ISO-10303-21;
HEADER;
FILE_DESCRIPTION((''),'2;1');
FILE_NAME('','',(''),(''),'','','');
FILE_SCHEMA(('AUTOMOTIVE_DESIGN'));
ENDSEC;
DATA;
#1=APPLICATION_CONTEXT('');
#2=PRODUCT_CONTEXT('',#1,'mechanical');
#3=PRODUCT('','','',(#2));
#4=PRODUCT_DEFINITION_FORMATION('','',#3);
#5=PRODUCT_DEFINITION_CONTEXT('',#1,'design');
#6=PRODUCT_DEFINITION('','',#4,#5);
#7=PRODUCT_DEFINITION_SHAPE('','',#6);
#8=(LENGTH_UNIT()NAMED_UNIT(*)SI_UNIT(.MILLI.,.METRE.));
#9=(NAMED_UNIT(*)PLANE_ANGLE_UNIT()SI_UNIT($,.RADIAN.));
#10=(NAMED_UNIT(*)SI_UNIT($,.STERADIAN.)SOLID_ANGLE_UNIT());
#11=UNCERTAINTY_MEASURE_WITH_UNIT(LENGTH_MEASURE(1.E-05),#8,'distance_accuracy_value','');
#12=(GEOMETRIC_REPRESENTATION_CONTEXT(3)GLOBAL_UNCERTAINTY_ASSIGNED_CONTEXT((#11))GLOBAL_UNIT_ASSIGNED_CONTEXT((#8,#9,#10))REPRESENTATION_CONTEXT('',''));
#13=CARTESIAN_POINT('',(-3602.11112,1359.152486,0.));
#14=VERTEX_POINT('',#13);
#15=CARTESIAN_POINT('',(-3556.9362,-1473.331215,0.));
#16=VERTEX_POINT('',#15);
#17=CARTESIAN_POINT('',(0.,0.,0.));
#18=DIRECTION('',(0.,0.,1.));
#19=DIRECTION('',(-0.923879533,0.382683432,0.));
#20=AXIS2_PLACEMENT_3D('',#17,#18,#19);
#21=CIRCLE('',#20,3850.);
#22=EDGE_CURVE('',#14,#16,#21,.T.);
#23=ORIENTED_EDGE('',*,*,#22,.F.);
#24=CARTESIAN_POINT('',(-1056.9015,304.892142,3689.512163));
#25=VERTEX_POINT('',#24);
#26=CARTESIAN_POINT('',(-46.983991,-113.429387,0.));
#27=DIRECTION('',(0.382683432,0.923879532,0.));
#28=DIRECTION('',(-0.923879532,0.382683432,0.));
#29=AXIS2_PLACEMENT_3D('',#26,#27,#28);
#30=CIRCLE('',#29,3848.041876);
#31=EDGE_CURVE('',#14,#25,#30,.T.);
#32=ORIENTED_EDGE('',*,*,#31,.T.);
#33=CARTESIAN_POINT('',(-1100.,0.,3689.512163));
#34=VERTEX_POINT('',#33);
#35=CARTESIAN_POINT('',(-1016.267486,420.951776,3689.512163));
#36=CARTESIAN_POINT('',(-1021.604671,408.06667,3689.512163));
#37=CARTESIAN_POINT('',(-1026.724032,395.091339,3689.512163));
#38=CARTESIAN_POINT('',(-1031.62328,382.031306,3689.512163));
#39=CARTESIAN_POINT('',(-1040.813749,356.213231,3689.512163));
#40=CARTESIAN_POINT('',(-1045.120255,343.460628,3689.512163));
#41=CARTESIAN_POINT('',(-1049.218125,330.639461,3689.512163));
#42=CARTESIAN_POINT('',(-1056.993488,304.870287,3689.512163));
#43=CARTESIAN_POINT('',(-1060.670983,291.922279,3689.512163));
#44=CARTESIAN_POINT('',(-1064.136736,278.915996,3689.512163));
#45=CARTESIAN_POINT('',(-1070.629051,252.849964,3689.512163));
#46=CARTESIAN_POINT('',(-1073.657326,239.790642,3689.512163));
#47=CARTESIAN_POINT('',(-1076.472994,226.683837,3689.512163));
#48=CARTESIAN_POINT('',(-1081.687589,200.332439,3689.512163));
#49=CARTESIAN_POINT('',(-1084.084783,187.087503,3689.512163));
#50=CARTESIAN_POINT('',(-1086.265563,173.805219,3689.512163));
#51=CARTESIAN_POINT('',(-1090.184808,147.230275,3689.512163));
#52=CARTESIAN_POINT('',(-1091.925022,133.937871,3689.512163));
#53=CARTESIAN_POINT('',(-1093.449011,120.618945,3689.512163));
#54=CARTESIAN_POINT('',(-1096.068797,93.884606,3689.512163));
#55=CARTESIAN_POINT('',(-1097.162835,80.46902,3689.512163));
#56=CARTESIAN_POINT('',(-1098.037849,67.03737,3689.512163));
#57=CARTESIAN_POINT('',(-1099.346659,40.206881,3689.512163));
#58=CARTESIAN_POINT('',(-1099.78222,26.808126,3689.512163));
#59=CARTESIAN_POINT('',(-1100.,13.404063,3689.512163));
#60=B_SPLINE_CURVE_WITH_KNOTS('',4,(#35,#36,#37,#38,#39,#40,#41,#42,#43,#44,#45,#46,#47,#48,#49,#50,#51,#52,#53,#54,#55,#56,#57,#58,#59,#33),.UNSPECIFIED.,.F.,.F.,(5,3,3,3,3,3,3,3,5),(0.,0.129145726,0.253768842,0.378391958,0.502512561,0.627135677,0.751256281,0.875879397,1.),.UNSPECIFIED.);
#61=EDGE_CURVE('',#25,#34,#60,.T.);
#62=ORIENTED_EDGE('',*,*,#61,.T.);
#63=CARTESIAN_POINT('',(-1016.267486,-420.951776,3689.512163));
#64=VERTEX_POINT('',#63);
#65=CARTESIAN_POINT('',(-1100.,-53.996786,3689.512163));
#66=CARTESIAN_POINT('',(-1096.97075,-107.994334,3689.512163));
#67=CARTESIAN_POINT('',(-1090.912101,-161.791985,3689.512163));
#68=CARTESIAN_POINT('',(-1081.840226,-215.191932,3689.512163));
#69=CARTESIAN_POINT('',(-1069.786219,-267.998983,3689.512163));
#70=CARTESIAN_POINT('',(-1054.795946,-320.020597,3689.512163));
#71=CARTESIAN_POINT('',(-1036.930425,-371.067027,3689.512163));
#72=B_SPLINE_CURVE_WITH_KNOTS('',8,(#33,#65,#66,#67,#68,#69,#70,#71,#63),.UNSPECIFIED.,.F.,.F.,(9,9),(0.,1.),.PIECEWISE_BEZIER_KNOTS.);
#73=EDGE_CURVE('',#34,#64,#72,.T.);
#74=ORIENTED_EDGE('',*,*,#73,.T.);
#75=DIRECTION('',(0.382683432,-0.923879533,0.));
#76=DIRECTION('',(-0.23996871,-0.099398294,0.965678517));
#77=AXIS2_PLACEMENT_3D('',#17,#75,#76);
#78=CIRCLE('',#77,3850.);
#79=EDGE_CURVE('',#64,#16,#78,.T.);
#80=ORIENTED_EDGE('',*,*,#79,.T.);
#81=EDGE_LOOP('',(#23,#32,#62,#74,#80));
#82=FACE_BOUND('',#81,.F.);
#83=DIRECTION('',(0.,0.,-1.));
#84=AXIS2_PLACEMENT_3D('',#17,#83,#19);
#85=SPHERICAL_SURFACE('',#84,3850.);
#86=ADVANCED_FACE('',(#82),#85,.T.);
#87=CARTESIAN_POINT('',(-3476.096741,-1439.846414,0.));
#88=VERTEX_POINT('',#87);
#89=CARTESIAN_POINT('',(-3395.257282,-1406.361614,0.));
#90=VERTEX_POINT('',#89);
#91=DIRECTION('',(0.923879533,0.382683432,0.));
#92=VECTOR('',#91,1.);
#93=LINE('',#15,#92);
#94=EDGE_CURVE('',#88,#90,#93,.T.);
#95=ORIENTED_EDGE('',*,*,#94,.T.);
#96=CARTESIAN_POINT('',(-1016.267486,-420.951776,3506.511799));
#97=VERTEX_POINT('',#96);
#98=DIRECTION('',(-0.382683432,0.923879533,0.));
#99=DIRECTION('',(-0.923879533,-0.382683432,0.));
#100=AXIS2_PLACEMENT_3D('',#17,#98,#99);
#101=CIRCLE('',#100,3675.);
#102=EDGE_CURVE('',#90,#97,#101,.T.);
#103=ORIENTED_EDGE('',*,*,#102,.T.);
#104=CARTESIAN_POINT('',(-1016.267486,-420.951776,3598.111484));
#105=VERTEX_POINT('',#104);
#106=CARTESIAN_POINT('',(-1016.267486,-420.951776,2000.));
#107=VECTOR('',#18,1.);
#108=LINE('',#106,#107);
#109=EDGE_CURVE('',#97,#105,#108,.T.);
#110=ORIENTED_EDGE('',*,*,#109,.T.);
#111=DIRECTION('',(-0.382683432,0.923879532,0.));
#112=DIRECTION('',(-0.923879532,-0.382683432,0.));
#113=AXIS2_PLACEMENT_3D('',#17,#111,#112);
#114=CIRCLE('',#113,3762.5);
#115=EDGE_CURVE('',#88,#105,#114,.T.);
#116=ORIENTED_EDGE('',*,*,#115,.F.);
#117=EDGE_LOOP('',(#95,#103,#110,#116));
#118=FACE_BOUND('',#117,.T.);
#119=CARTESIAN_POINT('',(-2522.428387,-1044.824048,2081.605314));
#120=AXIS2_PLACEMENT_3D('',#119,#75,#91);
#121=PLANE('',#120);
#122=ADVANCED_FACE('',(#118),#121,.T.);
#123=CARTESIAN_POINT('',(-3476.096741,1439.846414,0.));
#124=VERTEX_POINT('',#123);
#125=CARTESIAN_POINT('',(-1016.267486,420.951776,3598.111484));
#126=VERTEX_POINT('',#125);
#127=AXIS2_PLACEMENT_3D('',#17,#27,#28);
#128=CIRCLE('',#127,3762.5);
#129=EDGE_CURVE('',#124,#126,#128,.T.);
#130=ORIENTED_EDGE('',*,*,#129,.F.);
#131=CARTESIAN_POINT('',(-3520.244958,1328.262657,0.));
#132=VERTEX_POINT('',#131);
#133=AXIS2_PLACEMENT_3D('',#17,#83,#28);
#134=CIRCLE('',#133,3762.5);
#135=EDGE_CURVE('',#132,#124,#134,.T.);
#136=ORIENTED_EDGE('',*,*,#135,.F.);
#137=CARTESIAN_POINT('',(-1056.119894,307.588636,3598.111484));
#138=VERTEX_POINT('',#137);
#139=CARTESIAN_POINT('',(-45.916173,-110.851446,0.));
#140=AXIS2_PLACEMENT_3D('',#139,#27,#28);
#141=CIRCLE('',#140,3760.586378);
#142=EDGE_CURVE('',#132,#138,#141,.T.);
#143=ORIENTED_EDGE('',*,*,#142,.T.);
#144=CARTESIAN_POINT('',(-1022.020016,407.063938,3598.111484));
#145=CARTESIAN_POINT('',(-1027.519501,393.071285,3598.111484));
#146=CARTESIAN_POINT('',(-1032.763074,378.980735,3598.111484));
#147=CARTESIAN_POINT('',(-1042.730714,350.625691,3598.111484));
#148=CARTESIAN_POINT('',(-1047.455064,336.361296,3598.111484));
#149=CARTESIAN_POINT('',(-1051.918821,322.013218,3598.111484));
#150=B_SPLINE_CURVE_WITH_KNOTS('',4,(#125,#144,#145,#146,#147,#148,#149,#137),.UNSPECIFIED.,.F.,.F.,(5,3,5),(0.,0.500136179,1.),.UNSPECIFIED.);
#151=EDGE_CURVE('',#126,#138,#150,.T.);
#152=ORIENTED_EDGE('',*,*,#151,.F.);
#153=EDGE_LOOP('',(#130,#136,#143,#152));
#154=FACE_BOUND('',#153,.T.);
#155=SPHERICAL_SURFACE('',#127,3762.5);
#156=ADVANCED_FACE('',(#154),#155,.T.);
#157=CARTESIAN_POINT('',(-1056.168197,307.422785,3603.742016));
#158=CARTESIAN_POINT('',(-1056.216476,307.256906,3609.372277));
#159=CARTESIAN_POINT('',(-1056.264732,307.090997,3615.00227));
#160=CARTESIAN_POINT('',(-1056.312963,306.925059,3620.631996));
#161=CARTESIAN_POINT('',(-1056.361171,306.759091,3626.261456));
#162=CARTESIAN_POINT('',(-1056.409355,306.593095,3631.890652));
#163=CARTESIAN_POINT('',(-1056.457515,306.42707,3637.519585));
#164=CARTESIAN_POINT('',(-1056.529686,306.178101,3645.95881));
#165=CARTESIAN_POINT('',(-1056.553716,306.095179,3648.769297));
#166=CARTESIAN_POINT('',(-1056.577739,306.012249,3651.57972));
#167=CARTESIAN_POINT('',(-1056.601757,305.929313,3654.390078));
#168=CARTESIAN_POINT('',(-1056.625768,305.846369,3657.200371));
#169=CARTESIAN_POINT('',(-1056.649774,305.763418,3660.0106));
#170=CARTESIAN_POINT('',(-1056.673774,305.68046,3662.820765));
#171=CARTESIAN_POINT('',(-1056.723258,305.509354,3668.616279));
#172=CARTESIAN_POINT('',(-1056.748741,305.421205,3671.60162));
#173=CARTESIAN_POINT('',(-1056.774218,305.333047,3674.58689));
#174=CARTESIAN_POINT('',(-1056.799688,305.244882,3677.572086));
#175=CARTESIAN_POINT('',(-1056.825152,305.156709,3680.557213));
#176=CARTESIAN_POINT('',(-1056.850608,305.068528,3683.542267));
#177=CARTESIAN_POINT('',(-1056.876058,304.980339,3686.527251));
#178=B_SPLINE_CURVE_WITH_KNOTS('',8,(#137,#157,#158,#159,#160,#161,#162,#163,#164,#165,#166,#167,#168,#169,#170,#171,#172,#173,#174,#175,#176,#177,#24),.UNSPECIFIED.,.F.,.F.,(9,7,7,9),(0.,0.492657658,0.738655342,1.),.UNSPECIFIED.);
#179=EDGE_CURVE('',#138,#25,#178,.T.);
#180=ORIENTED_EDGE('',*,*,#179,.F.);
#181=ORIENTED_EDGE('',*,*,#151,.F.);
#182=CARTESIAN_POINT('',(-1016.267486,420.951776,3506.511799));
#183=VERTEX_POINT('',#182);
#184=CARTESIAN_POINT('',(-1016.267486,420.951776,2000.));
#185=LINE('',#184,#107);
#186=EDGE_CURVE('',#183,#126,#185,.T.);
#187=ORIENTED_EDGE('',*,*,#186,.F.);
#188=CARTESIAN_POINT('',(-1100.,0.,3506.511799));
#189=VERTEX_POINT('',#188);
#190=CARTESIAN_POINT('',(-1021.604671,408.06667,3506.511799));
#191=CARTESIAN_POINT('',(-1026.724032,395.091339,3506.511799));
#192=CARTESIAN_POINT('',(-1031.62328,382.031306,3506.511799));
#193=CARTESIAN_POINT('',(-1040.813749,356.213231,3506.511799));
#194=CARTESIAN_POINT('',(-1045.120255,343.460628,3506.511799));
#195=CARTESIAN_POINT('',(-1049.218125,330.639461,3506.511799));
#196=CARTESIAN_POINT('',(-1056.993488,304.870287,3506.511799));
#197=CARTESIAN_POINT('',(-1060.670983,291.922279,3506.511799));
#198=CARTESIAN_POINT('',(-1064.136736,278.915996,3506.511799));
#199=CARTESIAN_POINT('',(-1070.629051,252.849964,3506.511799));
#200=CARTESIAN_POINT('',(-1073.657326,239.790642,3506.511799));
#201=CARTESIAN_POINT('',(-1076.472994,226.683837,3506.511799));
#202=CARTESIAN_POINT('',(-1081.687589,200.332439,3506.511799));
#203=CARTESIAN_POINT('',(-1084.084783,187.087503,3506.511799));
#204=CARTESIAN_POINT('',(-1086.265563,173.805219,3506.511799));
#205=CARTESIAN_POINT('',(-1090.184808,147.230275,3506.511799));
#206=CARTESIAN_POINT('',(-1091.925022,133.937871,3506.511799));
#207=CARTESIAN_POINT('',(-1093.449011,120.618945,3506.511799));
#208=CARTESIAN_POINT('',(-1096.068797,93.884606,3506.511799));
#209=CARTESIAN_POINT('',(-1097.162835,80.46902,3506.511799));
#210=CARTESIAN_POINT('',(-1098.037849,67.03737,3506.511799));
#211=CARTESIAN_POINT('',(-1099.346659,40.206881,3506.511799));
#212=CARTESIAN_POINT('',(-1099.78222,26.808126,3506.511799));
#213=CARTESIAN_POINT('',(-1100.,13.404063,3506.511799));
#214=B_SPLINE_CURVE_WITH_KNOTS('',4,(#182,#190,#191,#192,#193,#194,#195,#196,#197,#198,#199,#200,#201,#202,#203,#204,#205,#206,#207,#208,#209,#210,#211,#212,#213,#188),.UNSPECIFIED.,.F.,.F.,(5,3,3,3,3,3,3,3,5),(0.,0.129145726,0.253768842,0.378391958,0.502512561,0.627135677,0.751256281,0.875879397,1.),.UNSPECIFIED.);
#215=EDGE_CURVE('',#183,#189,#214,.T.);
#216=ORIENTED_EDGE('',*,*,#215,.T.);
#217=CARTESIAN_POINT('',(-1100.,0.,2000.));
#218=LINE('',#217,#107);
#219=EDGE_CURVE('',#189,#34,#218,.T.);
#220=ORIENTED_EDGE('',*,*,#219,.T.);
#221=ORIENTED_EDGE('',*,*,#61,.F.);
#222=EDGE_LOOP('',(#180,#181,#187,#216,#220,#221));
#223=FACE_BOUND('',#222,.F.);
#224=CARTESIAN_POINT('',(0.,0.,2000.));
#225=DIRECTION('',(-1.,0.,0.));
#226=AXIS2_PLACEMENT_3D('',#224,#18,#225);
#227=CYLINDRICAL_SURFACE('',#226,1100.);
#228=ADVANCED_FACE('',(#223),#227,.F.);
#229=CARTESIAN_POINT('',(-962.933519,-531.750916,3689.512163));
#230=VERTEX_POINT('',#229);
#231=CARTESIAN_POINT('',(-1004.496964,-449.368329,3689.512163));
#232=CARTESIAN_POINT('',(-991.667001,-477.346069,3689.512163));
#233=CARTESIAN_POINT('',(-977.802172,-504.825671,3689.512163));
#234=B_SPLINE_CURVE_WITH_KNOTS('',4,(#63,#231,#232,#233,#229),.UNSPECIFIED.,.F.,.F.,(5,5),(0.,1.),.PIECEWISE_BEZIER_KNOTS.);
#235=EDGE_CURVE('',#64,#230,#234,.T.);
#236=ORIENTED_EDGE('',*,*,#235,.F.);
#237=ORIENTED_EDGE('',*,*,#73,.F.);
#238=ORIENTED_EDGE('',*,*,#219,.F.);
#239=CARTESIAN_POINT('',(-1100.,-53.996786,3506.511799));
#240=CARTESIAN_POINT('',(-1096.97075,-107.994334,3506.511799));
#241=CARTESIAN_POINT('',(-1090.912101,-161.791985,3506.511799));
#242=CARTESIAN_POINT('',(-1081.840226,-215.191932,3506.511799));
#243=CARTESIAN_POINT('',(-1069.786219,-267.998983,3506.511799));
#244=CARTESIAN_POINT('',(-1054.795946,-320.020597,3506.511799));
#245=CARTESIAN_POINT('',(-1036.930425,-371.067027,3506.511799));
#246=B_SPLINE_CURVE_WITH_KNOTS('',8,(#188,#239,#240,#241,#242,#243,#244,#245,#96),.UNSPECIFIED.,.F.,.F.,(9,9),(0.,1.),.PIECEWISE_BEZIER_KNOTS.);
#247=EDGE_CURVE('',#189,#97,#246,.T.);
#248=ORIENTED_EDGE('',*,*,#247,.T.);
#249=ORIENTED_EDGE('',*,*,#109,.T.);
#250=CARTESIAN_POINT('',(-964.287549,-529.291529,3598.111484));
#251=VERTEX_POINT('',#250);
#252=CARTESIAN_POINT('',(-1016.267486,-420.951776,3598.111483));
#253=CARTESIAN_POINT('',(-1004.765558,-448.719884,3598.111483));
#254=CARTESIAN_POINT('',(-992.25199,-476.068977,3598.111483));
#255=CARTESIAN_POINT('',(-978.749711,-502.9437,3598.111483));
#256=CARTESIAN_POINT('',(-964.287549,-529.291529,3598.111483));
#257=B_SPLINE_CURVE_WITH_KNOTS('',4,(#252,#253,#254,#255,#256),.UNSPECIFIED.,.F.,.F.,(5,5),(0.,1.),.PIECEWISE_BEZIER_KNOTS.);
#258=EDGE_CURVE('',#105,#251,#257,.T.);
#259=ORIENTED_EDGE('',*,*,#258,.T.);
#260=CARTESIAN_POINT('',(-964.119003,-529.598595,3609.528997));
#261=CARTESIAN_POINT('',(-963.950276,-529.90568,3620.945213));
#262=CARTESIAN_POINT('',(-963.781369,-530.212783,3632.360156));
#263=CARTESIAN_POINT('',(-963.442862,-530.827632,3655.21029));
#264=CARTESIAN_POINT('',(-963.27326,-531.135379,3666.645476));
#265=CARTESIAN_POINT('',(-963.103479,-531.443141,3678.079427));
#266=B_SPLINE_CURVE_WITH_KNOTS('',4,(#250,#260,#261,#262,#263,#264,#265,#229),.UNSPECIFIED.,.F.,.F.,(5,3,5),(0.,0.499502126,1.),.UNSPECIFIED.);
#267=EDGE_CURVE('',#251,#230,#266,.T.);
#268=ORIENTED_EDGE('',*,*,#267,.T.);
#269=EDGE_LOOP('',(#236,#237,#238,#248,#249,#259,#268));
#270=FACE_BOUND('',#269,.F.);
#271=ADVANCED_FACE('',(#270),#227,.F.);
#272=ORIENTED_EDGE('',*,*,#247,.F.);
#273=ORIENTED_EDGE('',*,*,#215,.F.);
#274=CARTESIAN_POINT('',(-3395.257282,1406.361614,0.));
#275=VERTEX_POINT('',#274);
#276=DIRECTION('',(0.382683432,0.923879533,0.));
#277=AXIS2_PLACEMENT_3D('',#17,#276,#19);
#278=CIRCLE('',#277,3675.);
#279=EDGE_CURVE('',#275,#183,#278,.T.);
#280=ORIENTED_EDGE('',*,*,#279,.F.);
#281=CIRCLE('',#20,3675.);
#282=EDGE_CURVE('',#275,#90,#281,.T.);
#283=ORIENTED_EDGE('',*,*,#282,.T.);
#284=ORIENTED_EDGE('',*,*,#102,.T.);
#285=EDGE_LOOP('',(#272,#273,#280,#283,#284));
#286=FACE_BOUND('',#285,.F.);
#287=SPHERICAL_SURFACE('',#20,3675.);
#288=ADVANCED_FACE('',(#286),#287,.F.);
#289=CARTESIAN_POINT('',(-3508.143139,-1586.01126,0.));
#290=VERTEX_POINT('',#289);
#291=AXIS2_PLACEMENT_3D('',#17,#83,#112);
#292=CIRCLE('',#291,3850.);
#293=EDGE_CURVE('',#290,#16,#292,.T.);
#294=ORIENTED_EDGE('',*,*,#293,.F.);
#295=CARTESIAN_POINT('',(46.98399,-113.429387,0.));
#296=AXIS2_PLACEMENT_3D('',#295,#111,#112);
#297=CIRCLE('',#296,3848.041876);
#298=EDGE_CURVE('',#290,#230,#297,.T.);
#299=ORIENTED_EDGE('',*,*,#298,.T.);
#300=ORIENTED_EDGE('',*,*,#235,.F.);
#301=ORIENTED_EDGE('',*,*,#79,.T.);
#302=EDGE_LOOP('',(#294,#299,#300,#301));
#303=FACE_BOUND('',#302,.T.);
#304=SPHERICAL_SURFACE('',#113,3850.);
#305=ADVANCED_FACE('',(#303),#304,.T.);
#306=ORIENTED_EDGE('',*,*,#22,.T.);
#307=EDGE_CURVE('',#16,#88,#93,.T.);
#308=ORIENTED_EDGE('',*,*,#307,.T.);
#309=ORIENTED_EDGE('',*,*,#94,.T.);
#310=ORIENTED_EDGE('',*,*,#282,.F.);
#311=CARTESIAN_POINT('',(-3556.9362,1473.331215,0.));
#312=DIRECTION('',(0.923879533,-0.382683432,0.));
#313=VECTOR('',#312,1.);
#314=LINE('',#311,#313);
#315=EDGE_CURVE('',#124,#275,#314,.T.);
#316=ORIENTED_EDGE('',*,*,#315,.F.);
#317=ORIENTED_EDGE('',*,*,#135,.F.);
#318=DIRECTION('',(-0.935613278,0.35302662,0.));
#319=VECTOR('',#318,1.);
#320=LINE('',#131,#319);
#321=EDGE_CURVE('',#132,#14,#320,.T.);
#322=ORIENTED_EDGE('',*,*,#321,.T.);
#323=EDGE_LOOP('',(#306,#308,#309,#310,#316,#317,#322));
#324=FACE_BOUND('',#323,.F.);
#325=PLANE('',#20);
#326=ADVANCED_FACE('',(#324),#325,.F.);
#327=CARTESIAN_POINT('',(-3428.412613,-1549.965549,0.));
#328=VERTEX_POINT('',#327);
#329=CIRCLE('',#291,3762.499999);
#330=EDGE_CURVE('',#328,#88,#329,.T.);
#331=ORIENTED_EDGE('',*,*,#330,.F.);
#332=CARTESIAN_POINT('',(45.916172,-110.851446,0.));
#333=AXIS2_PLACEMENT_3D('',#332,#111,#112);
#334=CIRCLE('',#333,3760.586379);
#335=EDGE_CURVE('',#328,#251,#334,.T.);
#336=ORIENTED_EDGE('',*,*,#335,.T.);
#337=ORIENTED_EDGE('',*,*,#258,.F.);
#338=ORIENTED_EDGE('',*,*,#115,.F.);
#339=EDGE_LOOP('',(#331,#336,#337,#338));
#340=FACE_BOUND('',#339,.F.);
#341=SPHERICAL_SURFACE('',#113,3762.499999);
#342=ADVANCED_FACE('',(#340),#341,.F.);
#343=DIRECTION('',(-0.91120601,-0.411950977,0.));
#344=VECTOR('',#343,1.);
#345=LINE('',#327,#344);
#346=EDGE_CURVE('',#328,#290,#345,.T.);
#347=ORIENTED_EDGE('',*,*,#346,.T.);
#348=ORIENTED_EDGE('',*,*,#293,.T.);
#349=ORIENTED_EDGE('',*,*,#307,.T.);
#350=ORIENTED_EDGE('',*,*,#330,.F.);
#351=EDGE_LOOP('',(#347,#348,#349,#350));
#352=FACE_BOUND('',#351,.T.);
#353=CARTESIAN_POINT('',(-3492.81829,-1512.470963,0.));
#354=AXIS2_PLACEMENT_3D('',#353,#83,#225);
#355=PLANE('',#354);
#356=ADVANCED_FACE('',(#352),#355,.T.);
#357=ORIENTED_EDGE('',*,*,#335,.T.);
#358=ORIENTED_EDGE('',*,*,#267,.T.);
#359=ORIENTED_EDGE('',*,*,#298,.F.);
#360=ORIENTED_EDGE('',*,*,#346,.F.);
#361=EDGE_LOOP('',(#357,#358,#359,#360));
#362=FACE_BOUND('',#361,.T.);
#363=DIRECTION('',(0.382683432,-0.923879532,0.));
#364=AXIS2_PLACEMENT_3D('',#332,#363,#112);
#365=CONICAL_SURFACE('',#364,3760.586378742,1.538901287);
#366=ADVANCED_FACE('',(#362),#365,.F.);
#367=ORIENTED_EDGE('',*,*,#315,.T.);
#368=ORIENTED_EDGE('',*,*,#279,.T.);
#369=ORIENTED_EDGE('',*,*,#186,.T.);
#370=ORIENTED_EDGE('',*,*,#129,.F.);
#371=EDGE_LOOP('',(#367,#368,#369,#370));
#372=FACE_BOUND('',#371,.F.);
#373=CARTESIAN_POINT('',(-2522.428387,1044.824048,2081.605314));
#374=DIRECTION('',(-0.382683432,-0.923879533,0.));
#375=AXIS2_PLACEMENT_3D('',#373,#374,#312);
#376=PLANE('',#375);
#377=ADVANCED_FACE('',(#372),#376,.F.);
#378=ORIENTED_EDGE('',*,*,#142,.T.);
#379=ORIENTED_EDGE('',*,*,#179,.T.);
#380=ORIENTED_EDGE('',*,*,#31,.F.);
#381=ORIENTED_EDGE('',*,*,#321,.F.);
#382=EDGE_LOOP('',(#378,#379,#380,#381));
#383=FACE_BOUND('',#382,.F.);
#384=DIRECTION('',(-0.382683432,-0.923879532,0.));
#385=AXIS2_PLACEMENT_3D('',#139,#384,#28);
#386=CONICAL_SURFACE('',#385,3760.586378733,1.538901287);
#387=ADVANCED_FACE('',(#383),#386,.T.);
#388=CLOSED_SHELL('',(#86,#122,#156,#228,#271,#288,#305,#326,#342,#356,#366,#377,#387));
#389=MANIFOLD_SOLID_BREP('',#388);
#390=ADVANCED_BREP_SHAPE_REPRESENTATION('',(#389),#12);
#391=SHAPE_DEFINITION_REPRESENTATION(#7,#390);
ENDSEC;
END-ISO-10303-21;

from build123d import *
from build123d import SkipClean  # not in build123d's __all__

# Parameters (mm, degrees)
F3_ANGLE_BACK = 22.5
F3_ANGLE      = 45
F8_W          = 1100
F8_H          = 4000


with BuildPart() as f3:
    # F2 (on Front) → F3 (revolve)
    with BuildSketch(Plane.XZ, mode=Mode.PRIVATE) as f3_sk:
        with BuildLine():
            Line((-1000, 3536.3293115885), (-1000, 3717.8622890043))
            ThreePointArc((-1000, 3717.8622890043), (-3055.5277776515, 2342.2745355743), (-3850, 0))
            Line((-3850, 0), (-3675, 0))
            ThreePointArc((-3675, 0), (-2930.9234892777, 2217.050405381), (-1000, 3536.3293115885))
        make_face()
    revolve(f3_sk.sketch.rotate(Axis((0, 0, 3762.5), (0, 0, 1)), -F3_ANGLE_BACK), axis=Axis((0, 0, 3762.5), (0, 0, 1)), revolution_arc=F3_ANGLE)

    # F5: sweep along a path in F5_path
    with BuildLine(Plane(origin=(-3556.9362001685, 1473.3312146056, 0), x_dir=(-0.9238795325, 0.3826834324, 0), z_dir=(-0.3826834324, -0.9238795325, 0))) as f5_path:
        ThreePointArc((0, 0), (-794.4722223485, -2342.2745355743), (-2850, -3717.8622890043))
    # F4 (on face) → F5 (sweep, cut)
    with BuildSketch(Plane(origin=(0, 0, 0), x_dir=(1, 0, 0), z_dir=(0, 0, -1))):
        with BuildLine():
            ThreePointArc((-3476.0967410737, -1439.8464142737), (-3498.6157300331, -1384.230552894), (-3520.2449580431, -1328.2626567709))
            Line((-3520.2449580431, -1328.2626567709), (-3602.111119858, -1359.1524859982))
            ThreePointArc((-3602.111119858, -1359.1524859982), (-3579.9788865455, -1416.4219611008), (-3556.9362001685, -1473.3312146056))
            Line((-3556.9362001685, -1473.3312146056), (-3476.0967410737, -1439.8464142737))
        make_face()
    sweep(path=f5_path.line, mode=Mode.SUBTRACT)

    # F7: sweep along a path in F7_path
    with BuildLine(Plane(origin=(-3556.9362001685, -1473.3312146056, 0), x_dir=(-0.9238795325, -0.3826834324, 0), z_dir=(0.3826834324, -0.9238795325, 0))) as f7_path:
        ThreePointArc((0, 0), (-794.4722223485, -2342.2745355743), (-2850, -3717.8622890043))
    # F6 (on face) → F7 (sweep)
    with BuildSketch(Plane(origin=(0, 0, 0), x_dir=(1, 0, 0), z_dir=(0, 0, -1))):
        with BuildLine():
            Line((-3428.4126130696, 1549.9655494704), (-3508.143138955, 1586.0112599232))
            ThreePointArc((-3508.143138955, 1586.0112599232), (-3532.9889208969, 1529.865773465), (-3556.9362001685, 1473.3312146056))
            Line((-3556.9362001685, 1473.3312146056), (-3476.0967410737, 1439.8464142737))
            ThreePointArc((-3476.0967410737, 1439.8464142736), (-3452.6937181493, 1495.0960967954), (-3428.4126130696, 1549.9655494704))
        make_face()
    with SkipClean():  # cleaning this boolean's faces spoils the solid; the shape is the same uncleaned
        sweep(path=f7_path.line)

    # F8 (on Front) → F9 (revolve, cut)
    with BuildSketch(Plane.XZ):
        with Locations((-550, 2000)):
            Rectangle(F8_W, F8_H)
    with SkipClean():  # cleaning this boolean's faces spoils the solid; the shape is the same uncleaned
        revolve(axis=Axis((0, 0, 2000), (0, 0, 1)), mode=Mode.SUBTRACT)


solid = f3.part
